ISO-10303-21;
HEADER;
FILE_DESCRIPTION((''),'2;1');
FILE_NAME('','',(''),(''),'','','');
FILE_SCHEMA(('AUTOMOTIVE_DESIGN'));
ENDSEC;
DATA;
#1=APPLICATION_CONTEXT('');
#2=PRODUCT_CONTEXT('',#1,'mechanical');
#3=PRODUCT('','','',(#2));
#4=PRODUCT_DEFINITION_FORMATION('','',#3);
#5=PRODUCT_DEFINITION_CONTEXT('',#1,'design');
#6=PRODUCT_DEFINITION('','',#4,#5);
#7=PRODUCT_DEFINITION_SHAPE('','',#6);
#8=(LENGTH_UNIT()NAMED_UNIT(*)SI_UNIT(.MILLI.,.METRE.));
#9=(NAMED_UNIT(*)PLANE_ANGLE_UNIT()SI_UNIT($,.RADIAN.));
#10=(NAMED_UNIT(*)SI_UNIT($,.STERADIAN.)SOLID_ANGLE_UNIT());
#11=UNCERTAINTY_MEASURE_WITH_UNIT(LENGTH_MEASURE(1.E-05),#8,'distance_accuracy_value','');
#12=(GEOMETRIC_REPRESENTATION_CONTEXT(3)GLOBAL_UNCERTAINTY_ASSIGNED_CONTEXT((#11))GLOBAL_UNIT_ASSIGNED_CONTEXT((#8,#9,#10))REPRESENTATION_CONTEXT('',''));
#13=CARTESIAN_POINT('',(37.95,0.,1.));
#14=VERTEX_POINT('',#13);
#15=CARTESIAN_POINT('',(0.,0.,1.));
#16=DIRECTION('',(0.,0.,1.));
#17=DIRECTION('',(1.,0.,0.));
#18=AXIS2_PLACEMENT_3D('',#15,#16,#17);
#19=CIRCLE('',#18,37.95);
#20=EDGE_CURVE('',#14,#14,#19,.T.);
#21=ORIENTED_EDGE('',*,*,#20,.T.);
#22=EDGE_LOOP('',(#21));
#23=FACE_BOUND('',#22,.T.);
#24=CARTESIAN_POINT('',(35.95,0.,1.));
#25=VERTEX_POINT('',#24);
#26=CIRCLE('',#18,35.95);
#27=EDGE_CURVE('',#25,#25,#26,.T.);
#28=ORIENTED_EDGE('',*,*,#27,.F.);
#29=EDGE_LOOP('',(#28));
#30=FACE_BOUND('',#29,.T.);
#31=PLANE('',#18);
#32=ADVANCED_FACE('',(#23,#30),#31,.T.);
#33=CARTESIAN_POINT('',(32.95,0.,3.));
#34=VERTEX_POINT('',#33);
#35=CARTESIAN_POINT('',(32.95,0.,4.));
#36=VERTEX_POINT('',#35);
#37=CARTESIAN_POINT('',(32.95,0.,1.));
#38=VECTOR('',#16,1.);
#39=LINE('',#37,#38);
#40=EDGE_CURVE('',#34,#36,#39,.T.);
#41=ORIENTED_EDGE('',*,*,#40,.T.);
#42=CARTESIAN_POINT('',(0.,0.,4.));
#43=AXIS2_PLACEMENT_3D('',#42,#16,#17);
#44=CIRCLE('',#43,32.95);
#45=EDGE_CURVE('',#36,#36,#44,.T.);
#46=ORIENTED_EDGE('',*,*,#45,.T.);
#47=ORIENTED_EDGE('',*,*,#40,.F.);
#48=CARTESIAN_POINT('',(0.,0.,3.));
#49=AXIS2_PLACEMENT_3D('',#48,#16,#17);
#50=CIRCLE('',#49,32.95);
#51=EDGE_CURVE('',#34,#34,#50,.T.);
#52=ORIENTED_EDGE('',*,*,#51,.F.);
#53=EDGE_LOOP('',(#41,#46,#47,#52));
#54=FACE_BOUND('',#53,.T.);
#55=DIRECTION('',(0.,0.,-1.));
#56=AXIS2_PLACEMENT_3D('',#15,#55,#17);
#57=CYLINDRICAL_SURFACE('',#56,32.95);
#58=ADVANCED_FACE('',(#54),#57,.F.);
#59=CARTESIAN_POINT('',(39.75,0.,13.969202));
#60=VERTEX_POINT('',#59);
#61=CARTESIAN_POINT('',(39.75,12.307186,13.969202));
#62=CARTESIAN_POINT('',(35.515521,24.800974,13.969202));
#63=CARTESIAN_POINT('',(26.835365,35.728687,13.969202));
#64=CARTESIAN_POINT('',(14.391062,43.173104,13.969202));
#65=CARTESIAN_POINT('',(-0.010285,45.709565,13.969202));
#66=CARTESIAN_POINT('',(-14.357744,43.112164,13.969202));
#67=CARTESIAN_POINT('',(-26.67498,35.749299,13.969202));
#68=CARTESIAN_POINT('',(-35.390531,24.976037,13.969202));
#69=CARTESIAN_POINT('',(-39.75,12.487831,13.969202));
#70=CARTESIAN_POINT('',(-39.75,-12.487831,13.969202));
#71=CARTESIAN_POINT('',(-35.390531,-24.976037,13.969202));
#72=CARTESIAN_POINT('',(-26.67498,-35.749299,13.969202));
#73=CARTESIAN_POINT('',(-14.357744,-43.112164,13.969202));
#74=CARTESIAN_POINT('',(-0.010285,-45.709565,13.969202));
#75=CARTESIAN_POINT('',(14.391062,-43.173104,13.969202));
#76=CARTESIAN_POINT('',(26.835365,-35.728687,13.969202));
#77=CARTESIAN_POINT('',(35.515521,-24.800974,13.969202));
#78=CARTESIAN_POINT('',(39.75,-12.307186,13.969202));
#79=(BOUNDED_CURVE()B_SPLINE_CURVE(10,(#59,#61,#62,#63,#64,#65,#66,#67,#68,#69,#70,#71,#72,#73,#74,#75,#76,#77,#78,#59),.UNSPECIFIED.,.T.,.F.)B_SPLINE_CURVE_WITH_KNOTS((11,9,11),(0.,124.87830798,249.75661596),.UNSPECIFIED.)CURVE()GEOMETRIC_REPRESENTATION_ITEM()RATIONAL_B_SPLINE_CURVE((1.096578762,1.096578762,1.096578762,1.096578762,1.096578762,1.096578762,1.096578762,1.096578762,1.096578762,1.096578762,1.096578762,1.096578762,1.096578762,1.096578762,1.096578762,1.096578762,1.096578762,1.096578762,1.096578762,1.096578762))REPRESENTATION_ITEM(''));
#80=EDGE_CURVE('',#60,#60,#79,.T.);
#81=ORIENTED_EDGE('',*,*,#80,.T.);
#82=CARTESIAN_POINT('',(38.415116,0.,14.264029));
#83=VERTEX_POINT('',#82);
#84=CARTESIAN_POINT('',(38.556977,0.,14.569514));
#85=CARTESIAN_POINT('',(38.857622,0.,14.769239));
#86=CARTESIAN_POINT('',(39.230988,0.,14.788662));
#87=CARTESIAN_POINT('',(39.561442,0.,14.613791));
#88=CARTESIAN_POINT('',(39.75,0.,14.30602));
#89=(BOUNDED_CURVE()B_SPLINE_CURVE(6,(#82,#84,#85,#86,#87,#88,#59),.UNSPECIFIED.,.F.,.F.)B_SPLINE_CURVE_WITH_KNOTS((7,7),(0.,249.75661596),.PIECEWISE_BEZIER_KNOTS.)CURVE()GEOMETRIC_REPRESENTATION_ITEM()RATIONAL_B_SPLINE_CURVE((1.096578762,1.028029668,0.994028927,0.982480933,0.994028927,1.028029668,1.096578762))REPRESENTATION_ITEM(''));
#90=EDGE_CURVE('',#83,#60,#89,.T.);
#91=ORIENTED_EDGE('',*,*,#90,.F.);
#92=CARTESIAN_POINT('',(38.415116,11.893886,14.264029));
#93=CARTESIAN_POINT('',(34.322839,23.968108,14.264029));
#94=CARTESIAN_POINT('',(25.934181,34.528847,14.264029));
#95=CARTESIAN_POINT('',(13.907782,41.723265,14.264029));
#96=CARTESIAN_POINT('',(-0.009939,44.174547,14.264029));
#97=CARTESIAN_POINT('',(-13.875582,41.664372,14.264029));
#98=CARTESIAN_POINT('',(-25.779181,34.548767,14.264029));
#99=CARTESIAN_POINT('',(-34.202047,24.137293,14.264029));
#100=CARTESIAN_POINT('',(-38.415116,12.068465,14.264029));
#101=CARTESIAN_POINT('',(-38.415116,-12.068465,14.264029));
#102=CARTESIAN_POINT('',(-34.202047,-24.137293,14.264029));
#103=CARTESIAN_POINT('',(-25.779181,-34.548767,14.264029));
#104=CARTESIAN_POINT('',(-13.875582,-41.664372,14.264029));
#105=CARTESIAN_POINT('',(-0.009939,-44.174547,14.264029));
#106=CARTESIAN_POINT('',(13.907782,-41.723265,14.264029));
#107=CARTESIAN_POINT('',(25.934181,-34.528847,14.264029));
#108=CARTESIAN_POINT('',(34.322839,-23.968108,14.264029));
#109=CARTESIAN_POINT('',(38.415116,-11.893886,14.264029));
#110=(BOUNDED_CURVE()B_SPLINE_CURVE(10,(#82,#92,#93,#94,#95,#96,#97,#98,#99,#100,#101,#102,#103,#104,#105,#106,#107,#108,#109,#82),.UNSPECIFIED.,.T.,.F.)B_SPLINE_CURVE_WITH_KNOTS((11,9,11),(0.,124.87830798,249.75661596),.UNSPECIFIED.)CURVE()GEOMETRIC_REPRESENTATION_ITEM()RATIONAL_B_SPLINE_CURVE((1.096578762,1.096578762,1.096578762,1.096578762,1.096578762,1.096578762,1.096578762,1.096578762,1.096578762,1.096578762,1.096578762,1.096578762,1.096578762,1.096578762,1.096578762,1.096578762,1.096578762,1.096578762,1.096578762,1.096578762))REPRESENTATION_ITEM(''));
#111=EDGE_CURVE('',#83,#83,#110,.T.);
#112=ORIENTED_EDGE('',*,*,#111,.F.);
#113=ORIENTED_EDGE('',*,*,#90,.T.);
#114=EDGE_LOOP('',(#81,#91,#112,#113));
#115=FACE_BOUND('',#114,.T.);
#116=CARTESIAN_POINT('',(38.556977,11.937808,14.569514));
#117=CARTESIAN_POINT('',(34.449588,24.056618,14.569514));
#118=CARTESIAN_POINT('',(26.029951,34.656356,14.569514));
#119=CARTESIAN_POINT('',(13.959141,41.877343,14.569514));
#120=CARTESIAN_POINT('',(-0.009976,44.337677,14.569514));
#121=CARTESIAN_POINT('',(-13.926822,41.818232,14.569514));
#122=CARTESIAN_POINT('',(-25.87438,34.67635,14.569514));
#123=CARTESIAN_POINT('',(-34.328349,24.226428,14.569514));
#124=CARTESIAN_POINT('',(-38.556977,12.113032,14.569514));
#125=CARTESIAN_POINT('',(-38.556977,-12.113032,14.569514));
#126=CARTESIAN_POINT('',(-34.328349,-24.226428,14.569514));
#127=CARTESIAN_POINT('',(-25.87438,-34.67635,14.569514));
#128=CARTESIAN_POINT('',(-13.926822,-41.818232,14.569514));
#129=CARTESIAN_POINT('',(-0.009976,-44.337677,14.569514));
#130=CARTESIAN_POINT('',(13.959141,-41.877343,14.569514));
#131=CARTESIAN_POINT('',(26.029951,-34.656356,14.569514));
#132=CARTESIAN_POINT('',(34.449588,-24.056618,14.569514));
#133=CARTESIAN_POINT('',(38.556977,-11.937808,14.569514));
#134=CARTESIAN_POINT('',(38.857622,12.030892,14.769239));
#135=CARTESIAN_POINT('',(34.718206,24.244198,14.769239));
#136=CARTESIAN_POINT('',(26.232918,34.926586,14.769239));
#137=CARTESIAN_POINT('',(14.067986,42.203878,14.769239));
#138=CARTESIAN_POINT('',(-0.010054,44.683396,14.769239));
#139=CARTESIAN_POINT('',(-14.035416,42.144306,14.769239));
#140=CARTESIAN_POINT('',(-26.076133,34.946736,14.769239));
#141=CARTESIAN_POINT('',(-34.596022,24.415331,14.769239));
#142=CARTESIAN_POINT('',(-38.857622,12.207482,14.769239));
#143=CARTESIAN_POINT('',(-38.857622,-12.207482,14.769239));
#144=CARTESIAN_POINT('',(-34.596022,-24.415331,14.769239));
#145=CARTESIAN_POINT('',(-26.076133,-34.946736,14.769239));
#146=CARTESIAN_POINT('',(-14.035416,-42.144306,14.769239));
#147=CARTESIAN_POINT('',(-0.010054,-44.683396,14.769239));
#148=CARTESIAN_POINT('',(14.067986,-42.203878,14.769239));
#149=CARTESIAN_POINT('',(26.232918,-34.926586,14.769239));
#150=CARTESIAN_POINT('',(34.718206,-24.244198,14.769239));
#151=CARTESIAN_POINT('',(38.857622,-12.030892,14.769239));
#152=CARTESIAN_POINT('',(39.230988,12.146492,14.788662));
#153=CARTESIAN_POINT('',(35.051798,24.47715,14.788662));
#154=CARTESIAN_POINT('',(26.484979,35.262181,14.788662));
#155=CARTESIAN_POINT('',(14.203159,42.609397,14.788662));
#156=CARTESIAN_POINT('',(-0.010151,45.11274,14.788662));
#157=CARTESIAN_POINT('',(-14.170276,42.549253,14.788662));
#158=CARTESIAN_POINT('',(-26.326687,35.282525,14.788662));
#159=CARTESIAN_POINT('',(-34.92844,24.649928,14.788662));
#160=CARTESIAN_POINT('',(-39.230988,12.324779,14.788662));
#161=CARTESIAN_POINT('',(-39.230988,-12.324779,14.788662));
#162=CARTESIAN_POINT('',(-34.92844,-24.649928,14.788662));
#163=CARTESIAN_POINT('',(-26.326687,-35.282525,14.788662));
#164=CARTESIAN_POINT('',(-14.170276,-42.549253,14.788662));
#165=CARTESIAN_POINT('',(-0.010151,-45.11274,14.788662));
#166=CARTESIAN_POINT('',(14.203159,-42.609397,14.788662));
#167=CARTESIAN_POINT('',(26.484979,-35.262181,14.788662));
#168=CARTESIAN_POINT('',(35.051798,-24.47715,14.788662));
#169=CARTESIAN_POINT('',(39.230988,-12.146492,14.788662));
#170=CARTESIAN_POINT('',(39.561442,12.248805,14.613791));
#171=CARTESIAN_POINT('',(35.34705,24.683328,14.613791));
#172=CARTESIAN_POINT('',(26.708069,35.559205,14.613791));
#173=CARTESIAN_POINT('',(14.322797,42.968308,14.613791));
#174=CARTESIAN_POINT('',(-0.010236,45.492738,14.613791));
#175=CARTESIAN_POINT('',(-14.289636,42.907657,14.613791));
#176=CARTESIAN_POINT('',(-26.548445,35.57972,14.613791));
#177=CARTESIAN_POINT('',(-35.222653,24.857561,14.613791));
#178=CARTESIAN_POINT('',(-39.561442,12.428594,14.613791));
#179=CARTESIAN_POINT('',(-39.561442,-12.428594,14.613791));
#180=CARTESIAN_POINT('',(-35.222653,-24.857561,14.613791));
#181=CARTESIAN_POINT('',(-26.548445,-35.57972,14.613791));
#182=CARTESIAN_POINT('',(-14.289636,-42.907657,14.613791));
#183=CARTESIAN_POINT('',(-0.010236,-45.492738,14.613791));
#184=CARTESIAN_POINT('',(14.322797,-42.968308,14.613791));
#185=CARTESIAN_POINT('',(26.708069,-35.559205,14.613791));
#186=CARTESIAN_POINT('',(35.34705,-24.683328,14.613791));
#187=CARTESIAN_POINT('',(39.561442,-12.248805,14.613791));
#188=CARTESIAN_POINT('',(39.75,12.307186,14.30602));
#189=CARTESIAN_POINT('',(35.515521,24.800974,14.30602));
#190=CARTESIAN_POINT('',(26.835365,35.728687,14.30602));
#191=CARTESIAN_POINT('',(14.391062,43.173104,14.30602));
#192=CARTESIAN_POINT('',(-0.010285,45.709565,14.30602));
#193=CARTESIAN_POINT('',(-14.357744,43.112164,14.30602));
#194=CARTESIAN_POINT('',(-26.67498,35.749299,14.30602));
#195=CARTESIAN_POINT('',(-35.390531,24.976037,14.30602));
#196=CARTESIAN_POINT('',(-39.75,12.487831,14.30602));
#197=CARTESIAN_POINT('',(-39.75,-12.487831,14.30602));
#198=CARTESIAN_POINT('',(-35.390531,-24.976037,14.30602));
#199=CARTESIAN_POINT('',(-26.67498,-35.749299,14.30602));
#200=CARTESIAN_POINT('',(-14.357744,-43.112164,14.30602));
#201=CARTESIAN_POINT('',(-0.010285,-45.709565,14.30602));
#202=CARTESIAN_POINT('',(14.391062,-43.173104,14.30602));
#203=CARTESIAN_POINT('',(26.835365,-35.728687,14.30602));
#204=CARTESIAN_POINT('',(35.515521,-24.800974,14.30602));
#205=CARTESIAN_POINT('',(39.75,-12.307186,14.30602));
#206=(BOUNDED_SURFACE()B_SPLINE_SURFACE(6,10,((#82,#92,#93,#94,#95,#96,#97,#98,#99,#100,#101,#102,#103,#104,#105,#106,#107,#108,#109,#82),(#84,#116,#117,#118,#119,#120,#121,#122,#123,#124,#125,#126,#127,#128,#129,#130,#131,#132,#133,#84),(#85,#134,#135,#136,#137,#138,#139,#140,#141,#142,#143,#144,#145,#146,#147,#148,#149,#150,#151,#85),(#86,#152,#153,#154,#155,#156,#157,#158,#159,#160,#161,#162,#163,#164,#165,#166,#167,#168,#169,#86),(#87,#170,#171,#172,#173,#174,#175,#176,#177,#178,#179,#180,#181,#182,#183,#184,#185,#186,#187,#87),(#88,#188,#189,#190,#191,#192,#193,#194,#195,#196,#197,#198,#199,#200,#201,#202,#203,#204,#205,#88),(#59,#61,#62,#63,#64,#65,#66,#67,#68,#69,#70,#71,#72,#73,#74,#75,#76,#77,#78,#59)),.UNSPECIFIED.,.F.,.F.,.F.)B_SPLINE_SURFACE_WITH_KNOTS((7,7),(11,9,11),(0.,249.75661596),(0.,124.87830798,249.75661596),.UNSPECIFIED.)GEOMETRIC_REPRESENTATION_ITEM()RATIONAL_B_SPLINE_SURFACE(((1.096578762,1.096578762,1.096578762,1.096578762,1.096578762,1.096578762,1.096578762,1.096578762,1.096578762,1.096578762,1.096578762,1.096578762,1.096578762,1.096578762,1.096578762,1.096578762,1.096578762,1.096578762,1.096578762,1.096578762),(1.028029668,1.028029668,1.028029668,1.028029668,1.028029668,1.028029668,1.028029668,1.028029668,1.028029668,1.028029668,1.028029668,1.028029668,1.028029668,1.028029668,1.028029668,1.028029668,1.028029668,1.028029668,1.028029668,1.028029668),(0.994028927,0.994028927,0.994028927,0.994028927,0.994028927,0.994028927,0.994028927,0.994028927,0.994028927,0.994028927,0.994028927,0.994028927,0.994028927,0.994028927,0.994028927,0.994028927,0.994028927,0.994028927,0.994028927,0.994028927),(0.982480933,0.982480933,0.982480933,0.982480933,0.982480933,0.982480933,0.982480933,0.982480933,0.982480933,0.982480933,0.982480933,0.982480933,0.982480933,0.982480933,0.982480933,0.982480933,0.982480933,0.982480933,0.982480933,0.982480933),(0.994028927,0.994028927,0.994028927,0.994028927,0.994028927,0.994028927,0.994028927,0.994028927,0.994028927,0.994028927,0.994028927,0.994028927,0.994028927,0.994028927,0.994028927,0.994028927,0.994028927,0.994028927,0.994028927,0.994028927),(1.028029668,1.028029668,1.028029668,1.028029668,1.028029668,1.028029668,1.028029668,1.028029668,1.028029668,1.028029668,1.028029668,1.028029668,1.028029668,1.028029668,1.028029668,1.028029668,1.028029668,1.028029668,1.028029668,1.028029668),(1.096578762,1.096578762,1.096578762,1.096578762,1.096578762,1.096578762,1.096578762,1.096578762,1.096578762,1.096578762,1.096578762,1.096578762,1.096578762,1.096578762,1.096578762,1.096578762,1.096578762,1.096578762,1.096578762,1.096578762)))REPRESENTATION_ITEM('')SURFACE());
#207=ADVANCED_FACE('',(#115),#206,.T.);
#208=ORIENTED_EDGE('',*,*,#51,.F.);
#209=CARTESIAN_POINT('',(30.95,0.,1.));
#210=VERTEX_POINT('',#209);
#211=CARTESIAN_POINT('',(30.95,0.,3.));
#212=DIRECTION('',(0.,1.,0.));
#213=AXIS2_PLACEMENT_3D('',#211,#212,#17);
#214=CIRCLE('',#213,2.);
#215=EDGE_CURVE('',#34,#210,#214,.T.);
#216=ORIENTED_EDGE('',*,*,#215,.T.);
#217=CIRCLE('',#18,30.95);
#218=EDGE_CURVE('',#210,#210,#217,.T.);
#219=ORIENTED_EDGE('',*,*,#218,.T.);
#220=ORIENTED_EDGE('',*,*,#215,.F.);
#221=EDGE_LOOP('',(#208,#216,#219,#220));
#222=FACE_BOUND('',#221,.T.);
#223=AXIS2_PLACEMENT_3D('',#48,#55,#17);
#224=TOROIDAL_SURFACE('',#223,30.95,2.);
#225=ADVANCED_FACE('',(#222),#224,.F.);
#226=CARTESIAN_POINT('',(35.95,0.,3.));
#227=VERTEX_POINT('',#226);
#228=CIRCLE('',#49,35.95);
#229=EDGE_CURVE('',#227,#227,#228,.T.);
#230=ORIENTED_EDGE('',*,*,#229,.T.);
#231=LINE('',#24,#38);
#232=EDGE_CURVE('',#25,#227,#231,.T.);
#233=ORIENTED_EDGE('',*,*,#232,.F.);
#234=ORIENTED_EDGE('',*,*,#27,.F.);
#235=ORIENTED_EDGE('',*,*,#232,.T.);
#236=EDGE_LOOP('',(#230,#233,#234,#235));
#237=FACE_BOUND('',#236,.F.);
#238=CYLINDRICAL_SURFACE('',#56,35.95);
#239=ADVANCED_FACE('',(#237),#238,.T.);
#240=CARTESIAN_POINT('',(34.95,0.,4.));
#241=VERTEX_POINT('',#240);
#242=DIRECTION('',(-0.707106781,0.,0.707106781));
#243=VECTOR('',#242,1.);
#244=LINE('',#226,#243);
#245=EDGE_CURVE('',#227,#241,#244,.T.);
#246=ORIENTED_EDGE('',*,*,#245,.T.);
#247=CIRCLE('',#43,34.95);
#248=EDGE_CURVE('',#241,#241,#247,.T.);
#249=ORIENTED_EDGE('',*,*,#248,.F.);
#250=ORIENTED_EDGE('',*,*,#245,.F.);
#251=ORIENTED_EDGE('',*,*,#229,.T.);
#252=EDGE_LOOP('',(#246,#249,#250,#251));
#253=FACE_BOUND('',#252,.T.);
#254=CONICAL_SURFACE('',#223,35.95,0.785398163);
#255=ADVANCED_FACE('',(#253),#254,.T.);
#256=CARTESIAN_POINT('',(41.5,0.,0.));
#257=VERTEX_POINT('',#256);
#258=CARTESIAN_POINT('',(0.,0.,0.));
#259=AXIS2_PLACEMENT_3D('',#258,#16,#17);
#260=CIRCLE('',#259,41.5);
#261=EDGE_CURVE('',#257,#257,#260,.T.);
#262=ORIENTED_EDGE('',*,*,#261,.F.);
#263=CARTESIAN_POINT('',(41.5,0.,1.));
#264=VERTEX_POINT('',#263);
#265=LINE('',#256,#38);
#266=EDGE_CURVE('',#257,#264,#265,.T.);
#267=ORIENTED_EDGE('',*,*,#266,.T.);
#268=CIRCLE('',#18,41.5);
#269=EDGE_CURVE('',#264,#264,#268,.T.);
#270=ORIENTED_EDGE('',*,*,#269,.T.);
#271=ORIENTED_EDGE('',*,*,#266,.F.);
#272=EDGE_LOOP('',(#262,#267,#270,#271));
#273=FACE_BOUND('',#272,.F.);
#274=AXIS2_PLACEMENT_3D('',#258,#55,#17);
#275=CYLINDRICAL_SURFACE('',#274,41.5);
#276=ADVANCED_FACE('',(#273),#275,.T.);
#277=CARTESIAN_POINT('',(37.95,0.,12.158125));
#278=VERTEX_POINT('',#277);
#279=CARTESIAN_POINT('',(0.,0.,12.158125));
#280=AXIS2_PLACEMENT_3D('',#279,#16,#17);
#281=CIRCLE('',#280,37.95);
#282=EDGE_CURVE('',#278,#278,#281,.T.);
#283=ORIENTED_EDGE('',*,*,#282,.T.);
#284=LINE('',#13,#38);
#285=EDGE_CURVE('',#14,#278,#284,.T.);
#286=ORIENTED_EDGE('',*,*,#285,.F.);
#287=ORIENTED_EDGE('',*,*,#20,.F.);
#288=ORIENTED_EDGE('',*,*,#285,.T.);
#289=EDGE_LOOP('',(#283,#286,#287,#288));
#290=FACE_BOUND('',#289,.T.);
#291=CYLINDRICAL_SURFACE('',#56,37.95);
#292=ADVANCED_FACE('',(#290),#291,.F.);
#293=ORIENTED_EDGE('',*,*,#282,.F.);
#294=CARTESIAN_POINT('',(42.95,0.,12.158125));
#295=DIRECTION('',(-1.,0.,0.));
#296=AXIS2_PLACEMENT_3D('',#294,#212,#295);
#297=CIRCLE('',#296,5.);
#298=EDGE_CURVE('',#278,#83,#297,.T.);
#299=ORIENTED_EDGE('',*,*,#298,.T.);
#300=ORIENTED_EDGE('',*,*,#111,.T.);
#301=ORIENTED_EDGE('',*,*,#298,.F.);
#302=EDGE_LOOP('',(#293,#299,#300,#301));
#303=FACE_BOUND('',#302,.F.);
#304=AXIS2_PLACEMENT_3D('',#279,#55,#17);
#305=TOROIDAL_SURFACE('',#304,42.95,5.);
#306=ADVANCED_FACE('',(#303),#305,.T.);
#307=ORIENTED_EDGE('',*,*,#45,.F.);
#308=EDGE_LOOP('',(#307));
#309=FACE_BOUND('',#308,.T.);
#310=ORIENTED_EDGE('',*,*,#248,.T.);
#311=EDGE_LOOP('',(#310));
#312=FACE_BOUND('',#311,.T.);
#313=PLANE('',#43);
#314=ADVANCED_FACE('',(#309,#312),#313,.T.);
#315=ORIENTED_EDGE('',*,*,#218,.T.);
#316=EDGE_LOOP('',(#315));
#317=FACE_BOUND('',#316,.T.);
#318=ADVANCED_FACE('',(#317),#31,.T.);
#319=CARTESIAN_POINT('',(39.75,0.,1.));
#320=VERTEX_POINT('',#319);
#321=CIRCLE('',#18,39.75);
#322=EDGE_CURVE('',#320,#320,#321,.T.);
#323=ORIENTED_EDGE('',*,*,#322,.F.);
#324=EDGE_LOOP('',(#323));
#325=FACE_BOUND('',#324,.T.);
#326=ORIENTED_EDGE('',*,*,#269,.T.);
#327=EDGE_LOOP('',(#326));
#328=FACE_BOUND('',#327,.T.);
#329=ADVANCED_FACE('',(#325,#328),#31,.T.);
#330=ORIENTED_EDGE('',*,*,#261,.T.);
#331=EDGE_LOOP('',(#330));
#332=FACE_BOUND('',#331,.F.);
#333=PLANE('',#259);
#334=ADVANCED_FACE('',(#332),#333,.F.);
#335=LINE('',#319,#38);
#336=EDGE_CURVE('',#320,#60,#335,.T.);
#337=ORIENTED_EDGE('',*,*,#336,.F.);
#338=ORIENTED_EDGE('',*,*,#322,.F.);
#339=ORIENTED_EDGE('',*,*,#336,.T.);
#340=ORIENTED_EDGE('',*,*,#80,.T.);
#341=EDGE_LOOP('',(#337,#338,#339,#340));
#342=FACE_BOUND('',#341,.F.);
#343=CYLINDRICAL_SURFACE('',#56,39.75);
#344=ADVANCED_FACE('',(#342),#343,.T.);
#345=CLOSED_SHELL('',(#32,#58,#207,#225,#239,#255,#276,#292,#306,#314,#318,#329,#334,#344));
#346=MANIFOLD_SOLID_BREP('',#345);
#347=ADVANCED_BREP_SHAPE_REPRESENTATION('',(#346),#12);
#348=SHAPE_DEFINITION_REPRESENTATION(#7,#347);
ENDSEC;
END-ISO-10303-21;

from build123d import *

# Parameters (mm, degrees)
F0_R     = 41.5
F1_DEPTH = 1
F2_R     = 39.75
F2_R_2   = 37.95
F3_DEPTH = 15
F4_R     = 35.95
F4_R_2   = 32.95
F5_DEPTH = 3
F6_SIZE  = 1
F8_R     = 0.7
F9_R     = 2


# Not quite as in the source:
# - a fillet or chamfer that OpenCascade refuses, or shapes differently, is made with other operations: its cross-section is extruded or revolved along the edge and cut away or added


with BuildPart() as f1:
    # F0 (on Top) → F1 (new body)
    with BuildSketch(Plane.XY):
        Circle(F0_R)
    extrude(amount=F1_DEPTH)

    # F2 (on face) → F3 (join)
    with BuildSketch(Plane.XY.offset(1)):
        Circle(F2_R)
        Circle(F2_R_2, mode=Mode.SUBTRACT)
    extrude(amount=F3_DEPTH)

    # F4 (on face) → F5 (join)
    with BuildSketch(Plane.XY.offset(1)):
        Circle(F4_R)
        Circle(F4_R_2, mode=Mode.SUBTRACT)
    extrude(amount=F5_DEPTH)

    # F6
    f6_edges = [f1.edges().sort_by_distance(p)[0] for p in [
        (-35.95, 0, 4),
    ]]
    chamfer(f6_edges, length=F6_SIZE)

    # F7: fillet of radius 5 on 1 edges, made by hand

    # F7_s1 → F7_t2 (revolve, cut)
    with BuildSketch(Plane.XZ):
        with BuildLine():
            ThreePointArc((37.95, 12.1581254575), (38.4223074309, 14.2794458011), (39.75, 16))
            Line((39.75, 16), (37.95, 16))
            Line((37.95, 16), (37.95, 12.1581254575))
        make_face()
    revolve(axis=Axis((0, 0, 16), (0, 0, 1)), mode=Mode.SUBTRACT)

    # F8
    f8_edges = [f1.edges().sort_by_distance(p)[0] for p in [
        (-39.75, 0, 16),
    ]]
    fillet(f8_edges, radius=F8_R)

    # F9
    f9_edges = [f1.edges().sort_by_distance(p)[0] for p in [
        (-32.95, 0, 1),
    ]]
    fillet(f9_edges, radius=F9_R)


solid = f1.part
